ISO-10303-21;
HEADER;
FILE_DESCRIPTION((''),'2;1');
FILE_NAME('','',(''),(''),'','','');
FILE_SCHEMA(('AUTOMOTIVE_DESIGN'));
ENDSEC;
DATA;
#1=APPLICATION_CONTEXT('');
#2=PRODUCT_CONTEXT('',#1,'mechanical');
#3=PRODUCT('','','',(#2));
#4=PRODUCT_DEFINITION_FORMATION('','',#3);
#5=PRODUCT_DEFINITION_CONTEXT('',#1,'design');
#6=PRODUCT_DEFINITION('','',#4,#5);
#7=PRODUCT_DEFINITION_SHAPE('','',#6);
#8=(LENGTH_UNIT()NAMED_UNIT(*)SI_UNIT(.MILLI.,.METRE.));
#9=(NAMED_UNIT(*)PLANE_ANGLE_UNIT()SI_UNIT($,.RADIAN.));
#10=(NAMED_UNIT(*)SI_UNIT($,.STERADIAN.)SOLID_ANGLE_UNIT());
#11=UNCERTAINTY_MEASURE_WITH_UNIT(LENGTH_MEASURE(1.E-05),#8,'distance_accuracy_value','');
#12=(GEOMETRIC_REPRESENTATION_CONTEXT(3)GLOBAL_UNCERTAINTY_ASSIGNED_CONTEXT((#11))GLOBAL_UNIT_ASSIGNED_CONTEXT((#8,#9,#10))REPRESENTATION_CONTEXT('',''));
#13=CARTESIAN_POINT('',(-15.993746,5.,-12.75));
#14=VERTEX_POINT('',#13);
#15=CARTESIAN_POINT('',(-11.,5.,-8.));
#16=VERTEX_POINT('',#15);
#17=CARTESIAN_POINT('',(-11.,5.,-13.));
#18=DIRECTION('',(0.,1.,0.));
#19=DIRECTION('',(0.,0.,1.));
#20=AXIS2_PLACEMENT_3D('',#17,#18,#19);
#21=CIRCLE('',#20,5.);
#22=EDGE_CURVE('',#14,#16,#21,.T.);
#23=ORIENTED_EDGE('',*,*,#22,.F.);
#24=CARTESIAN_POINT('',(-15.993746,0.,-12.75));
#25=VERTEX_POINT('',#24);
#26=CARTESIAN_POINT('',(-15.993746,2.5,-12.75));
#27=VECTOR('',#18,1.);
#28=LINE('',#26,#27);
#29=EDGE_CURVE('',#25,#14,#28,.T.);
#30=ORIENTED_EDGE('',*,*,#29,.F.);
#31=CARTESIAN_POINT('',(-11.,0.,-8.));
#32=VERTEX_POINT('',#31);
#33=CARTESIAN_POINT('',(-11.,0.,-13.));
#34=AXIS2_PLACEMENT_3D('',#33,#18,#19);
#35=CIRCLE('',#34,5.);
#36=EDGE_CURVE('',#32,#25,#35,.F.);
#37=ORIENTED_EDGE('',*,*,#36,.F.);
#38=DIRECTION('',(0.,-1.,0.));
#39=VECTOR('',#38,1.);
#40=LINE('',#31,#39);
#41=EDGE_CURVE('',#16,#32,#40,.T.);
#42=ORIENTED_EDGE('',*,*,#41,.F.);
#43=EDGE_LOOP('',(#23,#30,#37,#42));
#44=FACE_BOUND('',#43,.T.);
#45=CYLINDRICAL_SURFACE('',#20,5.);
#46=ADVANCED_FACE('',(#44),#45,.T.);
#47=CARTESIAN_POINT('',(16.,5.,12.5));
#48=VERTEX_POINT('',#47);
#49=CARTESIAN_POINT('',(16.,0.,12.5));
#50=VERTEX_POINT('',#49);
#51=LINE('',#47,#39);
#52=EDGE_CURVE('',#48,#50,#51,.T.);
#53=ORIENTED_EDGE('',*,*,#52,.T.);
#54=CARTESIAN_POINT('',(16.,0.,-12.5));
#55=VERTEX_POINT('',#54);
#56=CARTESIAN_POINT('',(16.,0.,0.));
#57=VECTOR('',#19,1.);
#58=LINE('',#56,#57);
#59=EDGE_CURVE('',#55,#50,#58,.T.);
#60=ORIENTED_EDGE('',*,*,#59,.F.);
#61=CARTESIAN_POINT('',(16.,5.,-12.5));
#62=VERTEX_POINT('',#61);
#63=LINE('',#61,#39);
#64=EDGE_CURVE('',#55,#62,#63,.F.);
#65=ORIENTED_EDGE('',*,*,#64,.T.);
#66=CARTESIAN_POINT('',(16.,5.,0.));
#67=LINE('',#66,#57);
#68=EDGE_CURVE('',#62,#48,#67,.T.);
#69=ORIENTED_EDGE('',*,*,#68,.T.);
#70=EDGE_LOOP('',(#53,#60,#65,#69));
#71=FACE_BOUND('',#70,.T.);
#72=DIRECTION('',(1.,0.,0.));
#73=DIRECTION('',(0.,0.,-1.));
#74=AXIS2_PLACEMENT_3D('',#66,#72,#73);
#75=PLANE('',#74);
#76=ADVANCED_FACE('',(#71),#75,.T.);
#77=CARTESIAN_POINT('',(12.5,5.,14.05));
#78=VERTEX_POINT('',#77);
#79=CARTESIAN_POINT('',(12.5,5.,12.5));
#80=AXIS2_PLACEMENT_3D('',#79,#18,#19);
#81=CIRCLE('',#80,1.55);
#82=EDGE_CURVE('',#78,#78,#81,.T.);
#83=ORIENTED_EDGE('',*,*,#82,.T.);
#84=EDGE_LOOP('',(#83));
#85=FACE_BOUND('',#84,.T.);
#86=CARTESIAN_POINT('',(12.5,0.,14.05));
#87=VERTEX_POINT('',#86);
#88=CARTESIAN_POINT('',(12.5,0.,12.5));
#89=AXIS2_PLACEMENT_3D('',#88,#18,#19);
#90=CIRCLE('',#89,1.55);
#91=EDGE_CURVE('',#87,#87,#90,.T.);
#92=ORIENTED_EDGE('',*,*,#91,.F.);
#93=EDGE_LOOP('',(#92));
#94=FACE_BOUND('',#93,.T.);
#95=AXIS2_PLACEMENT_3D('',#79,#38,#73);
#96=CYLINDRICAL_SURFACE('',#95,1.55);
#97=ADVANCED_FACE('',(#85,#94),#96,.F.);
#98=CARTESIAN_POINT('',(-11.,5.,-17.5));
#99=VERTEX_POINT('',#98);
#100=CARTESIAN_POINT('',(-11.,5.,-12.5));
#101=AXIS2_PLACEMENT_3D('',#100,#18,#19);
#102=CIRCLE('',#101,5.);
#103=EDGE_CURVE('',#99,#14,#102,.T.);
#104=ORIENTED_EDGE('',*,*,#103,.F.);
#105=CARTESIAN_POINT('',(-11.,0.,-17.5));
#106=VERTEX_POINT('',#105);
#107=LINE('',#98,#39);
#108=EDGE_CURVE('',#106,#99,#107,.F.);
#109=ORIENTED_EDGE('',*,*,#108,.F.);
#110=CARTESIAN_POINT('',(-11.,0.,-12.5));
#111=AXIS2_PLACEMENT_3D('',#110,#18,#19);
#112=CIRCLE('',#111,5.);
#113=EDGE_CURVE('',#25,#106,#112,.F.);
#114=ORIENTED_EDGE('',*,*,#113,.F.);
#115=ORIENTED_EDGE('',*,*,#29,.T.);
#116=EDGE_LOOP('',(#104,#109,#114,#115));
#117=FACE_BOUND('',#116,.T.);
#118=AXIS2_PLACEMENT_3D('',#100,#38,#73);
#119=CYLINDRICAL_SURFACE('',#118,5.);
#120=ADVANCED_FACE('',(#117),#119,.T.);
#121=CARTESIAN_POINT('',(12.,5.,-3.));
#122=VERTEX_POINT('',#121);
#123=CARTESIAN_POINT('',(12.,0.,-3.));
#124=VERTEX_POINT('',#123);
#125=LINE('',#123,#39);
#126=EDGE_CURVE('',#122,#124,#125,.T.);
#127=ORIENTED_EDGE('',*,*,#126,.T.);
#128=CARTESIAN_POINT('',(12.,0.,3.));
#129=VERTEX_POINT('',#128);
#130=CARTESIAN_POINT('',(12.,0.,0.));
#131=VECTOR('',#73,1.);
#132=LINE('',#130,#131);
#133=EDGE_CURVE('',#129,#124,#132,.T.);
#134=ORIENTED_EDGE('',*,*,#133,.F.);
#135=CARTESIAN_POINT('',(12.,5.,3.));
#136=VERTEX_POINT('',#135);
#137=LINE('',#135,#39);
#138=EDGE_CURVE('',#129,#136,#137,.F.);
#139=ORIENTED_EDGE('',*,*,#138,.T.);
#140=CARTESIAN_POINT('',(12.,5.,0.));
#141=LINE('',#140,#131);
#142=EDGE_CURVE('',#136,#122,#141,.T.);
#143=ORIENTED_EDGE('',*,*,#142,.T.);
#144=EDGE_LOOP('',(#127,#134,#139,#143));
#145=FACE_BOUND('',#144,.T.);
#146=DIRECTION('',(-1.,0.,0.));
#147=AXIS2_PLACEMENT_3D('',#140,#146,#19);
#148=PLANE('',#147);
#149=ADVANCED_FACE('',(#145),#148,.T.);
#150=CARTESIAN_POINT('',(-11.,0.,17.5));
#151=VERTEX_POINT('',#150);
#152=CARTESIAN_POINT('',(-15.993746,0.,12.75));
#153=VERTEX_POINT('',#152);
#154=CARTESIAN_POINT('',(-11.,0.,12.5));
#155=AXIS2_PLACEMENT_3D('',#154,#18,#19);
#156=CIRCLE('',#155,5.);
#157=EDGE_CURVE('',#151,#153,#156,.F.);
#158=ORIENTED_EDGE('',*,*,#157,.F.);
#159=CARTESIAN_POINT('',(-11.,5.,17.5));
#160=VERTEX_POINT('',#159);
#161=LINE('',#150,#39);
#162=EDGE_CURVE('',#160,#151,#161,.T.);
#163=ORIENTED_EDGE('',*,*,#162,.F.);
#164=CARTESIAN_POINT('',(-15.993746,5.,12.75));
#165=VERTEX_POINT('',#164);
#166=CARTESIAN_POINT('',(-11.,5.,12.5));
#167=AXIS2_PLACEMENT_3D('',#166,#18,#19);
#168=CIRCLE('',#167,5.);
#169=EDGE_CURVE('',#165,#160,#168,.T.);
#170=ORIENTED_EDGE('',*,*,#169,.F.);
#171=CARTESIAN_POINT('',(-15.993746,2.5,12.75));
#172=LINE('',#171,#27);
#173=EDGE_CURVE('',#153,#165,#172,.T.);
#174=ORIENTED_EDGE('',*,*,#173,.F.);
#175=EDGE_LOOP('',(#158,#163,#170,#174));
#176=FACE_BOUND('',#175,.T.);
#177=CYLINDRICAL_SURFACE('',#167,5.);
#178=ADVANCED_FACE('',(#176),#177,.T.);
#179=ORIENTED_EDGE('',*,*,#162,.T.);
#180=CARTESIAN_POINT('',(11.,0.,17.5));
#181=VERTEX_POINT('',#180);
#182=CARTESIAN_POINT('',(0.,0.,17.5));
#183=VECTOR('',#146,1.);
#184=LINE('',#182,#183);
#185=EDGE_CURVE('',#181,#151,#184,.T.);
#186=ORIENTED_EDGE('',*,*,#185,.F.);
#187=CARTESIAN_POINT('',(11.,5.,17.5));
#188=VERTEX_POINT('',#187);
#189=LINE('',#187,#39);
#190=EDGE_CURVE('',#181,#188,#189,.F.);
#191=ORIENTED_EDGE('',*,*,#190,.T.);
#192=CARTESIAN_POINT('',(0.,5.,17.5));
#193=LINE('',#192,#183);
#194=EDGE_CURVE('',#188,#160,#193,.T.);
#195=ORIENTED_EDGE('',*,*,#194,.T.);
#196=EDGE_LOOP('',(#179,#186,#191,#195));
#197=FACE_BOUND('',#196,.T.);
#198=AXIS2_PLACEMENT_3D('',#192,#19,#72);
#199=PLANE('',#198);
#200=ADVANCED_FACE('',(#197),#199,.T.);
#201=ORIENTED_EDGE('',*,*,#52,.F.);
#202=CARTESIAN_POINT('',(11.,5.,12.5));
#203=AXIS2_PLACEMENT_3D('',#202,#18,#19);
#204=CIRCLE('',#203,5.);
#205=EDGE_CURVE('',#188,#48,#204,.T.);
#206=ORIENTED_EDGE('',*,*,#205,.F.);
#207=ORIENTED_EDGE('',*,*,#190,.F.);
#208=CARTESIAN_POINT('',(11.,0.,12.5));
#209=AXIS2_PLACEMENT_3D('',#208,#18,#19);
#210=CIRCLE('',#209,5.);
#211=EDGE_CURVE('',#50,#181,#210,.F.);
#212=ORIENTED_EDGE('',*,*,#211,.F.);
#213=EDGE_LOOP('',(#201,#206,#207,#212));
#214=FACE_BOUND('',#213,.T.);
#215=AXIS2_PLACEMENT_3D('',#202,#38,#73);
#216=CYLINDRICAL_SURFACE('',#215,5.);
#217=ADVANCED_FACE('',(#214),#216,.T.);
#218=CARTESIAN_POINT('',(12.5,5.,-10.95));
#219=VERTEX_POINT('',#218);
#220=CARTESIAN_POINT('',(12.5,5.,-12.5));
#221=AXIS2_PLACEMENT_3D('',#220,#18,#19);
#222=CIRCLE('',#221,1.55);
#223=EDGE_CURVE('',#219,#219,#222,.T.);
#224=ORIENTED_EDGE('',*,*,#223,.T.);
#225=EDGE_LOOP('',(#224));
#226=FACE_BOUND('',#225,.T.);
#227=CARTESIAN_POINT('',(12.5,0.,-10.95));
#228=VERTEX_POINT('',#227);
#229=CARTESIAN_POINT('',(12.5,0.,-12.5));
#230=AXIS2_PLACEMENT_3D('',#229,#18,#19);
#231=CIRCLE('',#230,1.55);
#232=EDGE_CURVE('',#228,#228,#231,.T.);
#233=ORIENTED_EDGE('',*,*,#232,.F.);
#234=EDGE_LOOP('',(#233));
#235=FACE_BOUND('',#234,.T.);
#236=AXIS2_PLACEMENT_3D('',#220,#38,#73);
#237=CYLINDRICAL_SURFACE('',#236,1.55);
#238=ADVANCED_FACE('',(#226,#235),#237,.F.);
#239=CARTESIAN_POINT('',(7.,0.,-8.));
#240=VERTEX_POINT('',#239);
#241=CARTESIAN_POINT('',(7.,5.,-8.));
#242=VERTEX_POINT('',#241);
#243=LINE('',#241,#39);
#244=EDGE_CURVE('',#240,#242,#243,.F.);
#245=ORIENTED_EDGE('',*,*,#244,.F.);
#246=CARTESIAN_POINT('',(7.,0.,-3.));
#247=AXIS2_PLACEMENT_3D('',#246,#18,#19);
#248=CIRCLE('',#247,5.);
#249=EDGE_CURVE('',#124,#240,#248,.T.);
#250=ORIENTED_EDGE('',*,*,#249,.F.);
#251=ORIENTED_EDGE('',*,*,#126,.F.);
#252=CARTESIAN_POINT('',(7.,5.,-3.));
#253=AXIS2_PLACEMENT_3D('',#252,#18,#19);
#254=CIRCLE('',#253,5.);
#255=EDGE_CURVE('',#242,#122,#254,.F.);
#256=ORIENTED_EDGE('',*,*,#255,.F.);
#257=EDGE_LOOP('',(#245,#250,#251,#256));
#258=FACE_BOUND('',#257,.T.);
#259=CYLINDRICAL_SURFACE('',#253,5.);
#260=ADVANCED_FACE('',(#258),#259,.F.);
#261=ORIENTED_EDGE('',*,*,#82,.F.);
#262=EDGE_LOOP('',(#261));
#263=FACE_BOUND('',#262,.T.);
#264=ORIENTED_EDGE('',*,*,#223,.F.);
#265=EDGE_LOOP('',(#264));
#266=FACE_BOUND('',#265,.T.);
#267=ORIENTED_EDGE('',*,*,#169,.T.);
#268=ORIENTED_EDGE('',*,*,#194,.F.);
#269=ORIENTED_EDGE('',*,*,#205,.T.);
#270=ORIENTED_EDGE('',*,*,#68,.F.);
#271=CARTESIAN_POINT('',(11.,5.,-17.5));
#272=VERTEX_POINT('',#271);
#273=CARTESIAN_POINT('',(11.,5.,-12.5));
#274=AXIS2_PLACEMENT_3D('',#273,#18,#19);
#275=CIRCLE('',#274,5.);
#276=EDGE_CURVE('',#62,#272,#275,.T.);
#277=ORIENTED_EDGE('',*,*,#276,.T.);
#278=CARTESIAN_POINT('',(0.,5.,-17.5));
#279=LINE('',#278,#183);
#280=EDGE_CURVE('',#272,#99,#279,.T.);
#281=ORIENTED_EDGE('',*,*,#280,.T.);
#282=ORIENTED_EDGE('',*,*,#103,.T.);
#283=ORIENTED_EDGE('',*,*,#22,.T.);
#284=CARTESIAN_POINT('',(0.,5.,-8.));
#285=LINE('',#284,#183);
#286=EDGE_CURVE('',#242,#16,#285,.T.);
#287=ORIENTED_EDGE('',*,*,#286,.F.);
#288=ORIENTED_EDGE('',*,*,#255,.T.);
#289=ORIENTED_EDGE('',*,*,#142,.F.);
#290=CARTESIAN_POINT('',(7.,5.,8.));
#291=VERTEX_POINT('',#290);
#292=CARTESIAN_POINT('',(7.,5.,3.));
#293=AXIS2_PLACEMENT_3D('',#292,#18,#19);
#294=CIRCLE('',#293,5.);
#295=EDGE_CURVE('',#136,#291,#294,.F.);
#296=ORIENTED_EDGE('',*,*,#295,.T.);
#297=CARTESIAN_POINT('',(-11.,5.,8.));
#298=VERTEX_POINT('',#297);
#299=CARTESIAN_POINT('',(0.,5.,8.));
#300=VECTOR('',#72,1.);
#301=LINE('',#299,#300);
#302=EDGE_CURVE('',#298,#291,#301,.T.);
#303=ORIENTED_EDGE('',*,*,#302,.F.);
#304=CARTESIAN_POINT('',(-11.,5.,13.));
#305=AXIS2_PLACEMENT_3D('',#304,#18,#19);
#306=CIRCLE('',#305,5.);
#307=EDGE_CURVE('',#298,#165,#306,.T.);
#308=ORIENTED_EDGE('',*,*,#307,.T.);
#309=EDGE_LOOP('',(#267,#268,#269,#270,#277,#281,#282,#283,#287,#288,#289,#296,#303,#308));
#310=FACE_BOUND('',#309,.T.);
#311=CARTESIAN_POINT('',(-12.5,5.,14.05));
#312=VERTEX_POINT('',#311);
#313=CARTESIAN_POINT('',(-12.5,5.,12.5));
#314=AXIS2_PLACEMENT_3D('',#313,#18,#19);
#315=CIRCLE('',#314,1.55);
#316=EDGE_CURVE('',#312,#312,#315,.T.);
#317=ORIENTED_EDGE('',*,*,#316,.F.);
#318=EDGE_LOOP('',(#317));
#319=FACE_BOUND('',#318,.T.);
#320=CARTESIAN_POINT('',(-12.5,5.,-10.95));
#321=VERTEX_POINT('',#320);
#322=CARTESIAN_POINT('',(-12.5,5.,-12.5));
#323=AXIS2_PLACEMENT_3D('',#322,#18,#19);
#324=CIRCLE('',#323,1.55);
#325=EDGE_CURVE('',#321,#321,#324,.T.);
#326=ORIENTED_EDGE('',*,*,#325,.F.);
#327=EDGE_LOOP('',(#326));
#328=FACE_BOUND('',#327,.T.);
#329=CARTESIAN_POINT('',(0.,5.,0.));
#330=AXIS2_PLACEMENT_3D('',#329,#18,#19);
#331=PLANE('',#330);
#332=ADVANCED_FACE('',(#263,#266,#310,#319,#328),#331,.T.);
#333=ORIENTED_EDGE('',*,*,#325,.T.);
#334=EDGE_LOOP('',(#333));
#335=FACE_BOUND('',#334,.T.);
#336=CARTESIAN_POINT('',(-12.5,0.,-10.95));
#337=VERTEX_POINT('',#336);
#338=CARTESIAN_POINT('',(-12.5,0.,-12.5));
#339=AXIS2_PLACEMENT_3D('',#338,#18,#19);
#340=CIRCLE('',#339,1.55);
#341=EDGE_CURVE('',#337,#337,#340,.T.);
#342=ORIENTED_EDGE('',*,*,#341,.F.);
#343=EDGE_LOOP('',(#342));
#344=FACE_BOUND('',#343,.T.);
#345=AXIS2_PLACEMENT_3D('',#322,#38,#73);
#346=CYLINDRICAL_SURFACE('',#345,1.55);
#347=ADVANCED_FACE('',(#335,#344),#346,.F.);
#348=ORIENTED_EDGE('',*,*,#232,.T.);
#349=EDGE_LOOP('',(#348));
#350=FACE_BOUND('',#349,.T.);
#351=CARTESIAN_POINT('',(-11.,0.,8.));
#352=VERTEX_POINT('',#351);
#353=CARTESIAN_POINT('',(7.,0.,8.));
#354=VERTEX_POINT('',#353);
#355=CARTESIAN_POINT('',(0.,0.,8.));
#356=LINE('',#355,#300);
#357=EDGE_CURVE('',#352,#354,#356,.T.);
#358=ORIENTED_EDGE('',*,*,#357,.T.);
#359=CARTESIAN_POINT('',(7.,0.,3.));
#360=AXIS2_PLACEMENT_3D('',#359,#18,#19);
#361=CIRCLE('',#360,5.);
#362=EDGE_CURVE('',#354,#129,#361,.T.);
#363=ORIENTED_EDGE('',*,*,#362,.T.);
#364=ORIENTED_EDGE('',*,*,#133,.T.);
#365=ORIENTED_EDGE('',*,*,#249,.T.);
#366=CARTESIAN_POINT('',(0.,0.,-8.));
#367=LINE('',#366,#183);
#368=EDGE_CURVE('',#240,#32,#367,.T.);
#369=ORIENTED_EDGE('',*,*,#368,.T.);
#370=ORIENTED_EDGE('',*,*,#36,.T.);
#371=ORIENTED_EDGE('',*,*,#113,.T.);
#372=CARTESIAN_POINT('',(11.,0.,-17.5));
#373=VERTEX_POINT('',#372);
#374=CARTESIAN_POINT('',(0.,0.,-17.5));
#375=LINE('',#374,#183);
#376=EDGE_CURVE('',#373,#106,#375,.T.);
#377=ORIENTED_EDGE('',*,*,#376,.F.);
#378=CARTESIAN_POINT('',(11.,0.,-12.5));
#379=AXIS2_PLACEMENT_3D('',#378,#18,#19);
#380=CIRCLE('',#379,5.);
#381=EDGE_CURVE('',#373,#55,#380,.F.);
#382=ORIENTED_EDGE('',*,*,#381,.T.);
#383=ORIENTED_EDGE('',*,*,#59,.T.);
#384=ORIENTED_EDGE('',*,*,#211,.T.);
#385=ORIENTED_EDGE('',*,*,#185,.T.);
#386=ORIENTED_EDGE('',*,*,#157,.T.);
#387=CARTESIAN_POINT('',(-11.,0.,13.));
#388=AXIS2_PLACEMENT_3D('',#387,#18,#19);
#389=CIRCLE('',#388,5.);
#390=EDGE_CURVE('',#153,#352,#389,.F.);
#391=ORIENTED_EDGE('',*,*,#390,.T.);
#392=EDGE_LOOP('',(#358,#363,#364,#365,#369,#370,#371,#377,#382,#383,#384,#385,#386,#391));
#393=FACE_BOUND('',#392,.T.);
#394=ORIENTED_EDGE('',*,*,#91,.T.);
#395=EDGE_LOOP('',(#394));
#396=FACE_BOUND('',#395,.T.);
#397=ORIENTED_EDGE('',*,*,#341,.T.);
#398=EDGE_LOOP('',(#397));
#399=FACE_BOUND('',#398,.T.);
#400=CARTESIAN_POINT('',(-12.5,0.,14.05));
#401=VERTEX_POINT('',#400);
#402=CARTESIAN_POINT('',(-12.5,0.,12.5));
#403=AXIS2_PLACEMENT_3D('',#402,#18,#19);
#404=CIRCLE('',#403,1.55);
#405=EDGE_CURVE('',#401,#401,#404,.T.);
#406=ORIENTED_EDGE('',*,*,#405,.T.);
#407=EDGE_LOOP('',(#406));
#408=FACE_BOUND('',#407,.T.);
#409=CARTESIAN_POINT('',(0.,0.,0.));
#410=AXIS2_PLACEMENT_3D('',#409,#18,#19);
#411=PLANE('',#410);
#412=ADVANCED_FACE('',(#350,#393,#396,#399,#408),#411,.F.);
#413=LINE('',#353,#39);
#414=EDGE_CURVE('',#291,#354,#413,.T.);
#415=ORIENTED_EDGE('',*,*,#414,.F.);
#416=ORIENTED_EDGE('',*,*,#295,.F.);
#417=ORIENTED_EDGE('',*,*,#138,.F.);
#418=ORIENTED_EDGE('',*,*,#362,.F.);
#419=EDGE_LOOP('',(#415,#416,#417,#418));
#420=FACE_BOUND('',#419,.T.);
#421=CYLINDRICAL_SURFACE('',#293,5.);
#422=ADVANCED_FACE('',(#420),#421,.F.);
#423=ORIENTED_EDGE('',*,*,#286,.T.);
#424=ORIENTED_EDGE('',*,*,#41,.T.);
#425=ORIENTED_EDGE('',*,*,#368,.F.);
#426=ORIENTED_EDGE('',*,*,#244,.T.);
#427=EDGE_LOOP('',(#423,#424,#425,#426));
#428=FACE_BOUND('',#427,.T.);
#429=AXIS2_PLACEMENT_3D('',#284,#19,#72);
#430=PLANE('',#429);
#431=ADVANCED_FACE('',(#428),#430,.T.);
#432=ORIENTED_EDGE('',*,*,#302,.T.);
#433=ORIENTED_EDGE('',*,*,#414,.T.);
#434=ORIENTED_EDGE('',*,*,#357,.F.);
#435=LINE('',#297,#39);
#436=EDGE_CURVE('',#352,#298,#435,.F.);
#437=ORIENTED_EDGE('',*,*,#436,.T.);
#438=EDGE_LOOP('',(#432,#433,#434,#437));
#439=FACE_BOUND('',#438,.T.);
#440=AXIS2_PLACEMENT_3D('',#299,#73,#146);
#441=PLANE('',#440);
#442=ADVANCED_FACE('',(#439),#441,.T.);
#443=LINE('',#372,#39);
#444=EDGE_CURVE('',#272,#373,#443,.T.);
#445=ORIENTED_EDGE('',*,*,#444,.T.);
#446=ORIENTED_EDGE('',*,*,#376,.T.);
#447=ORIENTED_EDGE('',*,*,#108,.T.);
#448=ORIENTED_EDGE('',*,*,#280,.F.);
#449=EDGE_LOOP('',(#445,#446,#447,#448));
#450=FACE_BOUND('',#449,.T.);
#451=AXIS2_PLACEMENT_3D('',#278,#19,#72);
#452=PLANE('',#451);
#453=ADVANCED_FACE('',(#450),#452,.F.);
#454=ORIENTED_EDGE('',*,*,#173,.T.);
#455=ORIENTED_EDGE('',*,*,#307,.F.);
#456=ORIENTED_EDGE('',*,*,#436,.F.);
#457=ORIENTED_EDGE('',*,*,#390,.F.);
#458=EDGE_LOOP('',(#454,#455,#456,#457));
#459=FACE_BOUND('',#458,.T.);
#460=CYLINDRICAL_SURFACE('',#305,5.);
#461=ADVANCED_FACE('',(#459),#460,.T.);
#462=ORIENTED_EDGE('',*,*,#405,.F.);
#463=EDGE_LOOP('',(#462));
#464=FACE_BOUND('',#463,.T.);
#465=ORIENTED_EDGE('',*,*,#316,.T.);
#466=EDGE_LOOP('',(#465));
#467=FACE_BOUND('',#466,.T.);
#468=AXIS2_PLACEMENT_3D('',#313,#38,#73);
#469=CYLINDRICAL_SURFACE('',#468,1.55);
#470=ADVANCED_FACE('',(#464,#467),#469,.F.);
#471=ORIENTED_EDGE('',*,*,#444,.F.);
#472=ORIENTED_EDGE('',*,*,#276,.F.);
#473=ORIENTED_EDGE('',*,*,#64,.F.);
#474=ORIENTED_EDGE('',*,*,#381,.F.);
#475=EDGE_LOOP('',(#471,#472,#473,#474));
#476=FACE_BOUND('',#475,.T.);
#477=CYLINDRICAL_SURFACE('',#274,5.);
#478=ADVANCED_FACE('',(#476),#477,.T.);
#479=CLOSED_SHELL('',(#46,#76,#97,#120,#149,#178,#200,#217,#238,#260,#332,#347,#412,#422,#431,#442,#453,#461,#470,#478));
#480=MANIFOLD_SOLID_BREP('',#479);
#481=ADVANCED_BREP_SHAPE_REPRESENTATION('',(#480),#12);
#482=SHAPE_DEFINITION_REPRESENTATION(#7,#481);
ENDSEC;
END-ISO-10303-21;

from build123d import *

# Parameters (mm, degrees)
CROQUIS2_R              = 1.55
SALIENTE_EXTRUIR1_DEPTH = 5
REDONDEO9_R             = 5


with BuildPart() as part:
    # Croquis2 → Saliente-Extruir1 (new body)
    with BuildSketch(Plane(origin=(0, 0, 0), x_dir=(1, 0, 0), z_dir=(0, 1, 0))):
        Polygon((16, -17.5), (16, 17.5), (-16, 17.5), (-16, 8), (12, 8), (12, -8), (-16, -8), (-16, -17.5), align=None)
        with Locations(Location((-12.5, -12.5, 0), (0, 0, 270))):
            Circle(CROQUIS2_R, mode=Mode.SUBTRACT)
        with Locations(Location((12.5, -12.5, 0), (0, 0, 270))):
            Circle(CROQUIS2_R, mode=Mode.SUBTRACT)
        with Locations(Location((-12.5, 12.5, 0), (0, 0, 270))):
            Circle(CROQUIS2_R, mode=Mode.SUBTRACT)
        with Locations(Location((12.5, 12.5, 0), (0, 0, 270))):
            Circle(CROQUIS2_R, mode=Mode.SUBTRACT)
    extrude(amount=SALIENTE_EXTRUIR1_DEPTH)

    # Redondeo9
    # the kernel refuses this fillet: 5 mm, written as the material it adds along each edge
    with BuildSketch(Plane(origin=(12, 0, 8), x_dir=(0, 0, -1), z_dir=(0, 1, 0)), Plane(origin=(12, 0, -8), x_dir=(-1, 0, 0), z_dir=(0, 1, 0))) as redondeo9_piece_1:
        with BuildLine():
            CenterArc((REDONDEO9_R, REDONDEO9_R), REDONDEO9_R, 180, 90)
            Line((0, REDONDEO9_R), (0, 0))
            Line((0, 0), (REDONDEO9_R, 0))
        make_face()
    extrude(amount=5)
    # the kernel refuses this fillet: 5 mm, written as the material it takes off along each edge
    with BuildSketch(Plane(origin=(-16, -12.5, 8), x_dir=(0, 0, 1), z_dir=(0, 1, 0))) as redondeo9_2_piece_1:
        with BuildLine():
            CenterArc((REDONDEO9_R, REDONDEO9_R), REDONDEO9_R, 180, 90)
            Line((0, REDONDEO9_R), (0, 0))
            Line((0, 0), (REDONDEO9_R, 0))
        make_face()
    extrude(amount=30, mode=Mode.SUBTRACT)
    with BuildSketch(Plane(origin=(-16, -12.5, 17.5), x_dir=(0, 0, -1), z_dir=(0, 1, 0)), Plane(origin=(-16, -12.5, -17.5), x_dir=(1, 0, 0), z_dir=(0, 1, 0)), Plane(origin=(16, -12.5, -17.5), x_dir=(0, 0, 1), z_dir=(0, 1, 0)), Plane(origin=(-16, -12.5, -8), x_dir=(0, 0, -1), z_dir=(0, 1, 0)), Plane(origin=(16, -12.5, 17.5), x_dir=(-1, 0, 0), z_dir=(0, 1, 0))) as redondeo9_2_piece_2:
        with BuildLine():
            CenterArc((REDONDEO9_R, -REDONDEO9_R), REDONDEO9_R, 90, 90)
            Line((0, -REDONDEO9_R), (0, 0))
            Line((0, 0), (REDONDEO9_R, 0))
        make_face()
    extrude(amount=30, mode=Mode.SUBTRACT)


solid = part.part
